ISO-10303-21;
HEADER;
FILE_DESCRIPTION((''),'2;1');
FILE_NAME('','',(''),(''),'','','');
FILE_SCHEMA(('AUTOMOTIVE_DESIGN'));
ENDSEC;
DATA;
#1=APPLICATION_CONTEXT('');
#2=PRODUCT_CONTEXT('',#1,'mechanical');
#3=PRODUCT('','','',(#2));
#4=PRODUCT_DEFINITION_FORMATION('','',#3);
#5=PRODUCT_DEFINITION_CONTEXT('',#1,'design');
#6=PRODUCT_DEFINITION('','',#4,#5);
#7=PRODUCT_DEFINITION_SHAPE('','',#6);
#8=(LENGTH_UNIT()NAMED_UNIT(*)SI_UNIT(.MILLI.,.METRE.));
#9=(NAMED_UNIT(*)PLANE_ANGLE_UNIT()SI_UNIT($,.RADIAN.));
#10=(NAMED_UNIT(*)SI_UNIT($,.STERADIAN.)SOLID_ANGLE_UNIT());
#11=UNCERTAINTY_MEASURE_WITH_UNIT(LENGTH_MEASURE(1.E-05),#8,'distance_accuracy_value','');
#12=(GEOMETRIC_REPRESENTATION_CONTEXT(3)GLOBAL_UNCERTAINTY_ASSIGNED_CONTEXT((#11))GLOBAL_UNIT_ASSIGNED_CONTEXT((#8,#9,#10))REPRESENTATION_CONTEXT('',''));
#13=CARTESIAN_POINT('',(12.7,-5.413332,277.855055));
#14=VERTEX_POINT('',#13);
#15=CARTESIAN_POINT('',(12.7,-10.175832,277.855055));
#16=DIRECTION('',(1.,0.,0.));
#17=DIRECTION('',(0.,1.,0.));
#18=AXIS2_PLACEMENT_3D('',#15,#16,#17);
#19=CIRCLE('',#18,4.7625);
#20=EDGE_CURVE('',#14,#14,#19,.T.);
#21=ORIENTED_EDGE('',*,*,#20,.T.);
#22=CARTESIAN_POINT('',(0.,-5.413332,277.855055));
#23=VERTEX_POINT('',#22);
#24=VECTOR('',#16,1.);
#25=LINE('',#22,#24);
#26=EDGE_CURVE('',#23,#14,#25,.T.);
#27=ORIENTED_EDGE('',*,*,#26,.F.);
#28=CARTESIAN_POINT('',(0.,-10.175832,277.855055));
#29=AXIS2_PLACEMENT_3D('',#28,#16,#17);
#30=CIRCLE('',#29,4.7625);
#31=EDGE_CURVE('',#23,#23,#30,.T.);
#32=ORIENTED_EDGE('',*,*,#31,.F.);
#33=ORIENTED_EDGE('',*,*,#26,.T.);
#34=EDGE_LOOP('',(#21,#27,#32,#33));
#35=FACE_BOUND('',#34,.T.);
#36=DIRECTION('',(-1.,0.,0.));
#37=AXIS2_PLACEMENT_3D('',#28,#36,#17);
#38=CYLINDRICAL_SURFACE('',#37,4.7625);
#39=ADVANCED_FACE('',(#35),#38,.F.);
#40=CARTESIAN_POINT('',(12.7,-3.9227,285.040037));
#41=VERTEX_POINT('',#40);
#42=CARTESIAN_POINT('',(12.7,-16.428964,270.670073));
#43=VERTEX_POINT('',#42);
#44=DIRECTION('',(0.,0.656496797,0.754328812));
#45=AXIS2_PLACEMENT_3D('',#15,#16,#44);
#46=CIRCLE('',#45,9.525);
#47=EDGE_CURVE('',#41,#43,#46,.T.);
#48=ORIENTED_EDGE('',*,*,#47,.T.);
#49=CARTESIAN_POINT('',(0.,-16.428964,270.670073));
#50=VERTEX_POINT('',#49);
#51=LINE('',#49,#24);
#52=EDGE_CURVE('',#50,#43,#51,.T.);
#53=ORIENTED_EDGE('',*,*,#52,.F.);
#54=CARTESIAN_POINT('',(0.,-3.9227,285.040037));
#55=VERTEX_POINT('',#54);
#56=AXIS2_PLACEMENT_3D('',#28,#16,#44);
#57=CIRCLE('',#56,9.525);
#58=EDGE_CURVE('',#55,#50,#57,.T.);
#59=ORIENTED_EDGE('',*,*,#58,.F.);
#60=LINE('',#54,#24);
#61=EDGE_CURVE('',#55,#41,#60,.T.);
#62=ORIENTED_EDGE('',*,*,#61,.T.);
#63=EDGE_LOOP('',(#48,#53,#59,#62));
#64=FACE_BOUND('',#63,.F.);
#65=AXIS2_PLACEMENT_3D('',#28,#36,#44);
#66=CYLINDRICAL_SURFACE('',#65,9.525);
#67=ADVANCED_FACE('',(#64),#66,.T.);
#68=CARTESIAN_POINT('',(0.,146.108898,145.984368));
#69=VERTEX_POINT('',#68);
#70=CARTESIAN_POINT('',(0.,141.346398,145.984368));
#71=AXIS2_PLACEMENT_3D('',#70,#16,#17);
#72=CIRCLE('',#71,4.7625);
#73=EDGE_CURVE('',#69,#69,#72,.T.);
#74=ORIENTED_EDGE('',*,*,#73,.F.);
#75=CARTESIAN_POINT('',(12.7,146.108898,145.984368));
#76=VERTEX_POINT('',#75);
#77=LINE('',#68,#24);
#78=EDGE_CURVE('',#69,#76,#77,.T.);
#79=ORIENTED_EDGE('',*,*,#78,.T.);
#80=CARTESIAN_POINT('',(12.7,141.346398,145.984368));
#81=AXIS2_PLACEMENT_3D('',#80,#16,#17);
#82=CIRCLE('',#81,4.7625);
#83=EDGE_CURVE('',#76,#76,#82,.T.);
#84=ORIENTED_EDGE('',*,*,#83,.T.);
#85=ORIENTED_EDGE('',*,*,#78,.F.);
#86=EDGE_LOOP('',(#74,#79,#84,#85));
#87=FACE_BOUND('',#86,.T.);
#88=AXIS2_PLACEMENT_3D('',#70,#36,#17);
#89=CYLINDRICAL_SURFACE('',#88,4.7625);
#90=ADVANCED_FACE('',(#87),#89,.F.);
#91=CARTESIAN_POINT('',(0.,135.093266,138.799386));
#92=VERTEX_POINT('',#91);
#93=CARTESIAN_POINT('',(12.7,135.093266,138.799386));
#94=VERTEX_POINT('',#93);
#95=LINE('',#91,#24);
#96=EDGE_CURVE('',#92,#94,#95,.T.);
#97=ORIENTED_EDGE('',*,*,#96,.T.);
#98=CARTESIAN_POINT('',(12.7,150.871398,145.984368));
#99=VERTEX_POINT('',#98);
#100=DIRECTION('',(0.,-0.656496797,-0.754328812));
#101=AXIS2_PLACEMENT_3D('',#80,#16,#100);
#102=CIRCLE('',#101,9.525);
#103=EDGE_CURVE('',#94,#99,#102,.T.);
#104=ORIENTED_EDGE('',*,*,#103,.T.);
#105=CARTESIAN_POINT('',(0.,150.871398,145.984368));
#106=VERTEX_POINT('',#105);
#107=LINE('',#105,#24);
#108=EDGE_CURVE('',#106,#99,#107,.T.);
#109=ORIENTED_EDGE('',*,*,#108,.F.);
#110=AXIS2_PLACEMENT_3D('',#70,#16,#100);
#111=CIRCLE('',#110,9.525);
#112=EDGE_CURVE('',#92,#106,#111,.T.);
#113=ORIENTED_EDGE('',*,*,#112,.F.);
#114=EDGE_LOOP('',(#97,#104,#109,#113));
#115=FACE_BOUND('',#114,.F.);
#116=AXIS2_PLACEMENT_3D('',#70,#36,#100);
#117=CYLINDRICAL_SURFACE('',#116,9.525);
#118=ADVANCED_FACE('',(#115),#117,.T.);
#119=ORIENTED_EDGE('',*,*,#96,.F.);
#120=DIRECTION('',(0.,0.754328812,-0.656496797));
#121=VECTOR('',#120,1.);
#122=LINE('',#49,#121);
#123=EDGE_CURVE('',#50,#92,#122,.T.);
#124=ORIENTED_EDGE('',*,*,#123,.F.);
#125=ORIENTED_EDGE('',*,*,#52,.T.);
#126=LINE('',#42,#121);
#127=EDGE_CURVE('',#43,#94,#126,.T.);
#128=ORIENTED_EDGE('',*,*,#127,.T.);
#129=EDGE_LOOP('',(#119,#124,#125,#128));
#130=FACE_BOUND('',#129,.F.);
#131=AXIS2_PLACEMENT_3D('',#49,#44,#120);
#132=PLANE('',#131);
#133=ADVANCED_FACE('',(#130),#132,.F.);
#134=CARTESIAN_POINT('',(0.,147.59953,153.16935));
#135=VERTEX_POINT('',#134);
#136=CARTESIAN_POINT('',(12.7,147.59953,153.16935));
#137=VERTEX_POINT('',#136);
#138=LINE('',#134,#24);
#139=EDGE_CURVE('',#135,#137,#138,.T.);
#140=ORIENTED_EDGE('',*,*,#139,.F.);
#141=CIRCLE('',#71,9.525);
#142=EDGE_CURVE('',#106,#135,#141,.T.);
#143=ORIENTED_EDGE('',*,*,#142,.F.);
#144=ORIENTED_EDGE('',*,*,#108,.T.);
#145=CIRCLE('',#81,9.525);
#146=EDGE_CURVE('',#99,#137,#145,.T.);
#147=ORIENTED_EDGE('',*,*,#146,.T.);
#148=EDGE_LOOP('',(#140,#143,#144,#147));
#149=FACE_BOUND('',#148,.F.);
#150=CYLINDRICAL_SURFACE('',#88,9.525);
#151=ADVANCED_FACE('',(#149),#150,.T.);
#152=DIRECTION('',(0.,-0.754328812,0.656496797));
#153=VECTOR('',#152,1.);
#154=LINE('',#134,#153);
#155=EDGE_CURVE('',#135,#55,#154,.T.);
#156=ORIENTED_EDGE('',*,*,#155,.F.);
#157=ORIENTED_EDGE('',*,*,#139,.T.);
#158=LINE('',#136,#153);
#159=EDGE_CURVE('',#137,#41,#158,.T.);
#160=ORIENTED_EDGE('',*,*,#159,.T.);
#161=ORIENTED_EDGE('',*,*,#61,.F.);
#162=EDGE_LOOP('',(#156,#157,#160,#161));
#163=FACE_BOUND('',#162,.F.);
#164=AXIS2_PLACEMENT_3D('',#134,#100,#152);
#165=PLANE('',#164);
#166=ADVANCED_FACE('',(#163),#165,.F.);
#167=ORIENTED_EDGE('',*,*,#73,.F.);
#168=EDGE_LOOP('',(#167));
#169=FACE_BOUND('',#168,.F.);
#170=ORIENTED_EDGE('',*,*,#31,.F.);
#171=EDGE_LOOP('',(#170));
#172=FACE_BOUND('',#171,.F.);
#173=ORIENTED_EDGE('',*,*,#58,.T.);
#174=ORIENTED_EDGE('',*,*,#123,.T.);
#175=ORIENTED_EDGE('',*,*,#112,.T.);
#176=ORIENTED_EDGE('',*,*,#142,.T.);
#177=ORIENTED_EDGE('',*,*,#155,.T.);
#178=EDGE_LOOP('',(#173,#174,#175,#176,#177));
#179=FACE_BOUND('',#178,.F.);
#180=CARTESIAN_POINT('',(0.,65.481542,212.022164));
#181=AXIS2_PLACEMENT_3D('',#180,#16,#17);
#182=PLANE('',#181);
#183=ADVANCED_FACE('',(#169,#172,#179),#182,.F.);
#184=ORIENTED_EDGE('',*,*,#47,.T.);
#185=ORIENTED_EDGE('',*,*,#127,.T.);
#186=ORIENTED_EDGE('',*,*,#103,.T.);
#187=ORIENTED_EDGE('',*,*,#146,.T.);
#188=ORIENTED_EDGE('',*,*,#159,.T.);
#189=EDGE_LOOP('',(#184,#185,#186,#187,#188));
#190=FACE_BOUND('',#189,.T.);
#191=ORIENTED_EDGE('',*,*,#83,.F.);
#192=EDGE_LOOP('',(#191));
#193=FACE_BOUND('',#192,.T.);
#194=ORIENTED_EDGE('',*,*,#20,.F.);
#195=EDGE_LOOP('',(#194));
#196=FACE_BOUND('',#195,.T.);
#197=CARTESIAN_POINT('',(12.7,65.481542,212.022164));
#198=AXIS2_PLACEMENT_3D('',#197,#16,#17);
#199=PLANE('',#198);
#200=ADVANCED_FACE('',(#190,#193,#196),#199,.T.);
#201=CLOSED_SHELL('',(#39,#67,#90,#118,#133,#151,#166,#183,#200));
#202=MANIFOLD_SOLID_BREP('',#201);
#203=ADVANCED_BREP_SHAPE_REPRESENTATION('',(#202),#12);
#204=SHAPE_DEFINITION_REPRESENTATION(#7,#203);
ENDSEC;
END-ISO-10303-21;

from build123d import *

# Parameters (mm, degrees)
F0_R     = 4.7625
F1_DEPTH = 12.7


# Not quite as in the source:
# - a feature names something its author has since deleted; it is built from what else it names


with BuildPart() as f1:
    # F0 (on Right) → F1 (new body)
    with BuildSketch(Plane.YZ):
        with BuildLine():
            ThreePointArc((135.0932664818, 138.7993858615), (134.1614165409, 152.23749978), (147.5995304594, 153.1693497209))
            Line((147.5995304594, 153.1693497209), (-3.9226998699, 285.0400370456))
            ThreePointArc((-3.9226998699, 285.0400370456), (-1.5073052482, 281.8024937035), (-0.6508318587, 277.8550551158))
            ThreePointArc((-0.6508318587, 277.8550551158), (-6.2283932711, 269.1865285054), (-16.4289638475, 270.6700731861))
            Line((-16.4289638475, 270.6700731861), (135.0932664818, 138.7993858615))
        make_face()
        with BuildLine():
            ThreePointArc((-0.6508318587, 277.8550551158), (-1.5073052482, 281.8024937035), (-3.9226998699, 285.0400370456))
            ThreePointArc((-3.9226998699, 285.0400370456), (-17.3608137885, 284.1081871047), (-16.4289638475, 270.6700731861))
            ThreePointArc((-16.4289638475, 270.6700731861), (-6.2283932711, 269.1865285054), (-0.6508318587, 277.8550551158))
        make_face()
        with Locations((-10.1758318587, 277.8550551158)):
            Circle(F0_R, mode=Mode.SUBTRACT)
        with BuildLine():
            ThreePointArc((135.0932664818, 138.7993858615), (145.2938370582, 137.3158411807), (150.8713984706, 145.9843677912))
            ThreePointArc((150.8713984706, 145.9843677912), (150.0149250811, 149.9318063789), (147.5995304594, 153.1693497209))
            ThreePointArc((147.5995304594, 153.1693497209), (134.1614165409, 152.23749978), (135.0932664818, 138.7993858615))
        make_face()
        with Locations((141.3463984706, 145.9843677912)):
            Circle(F0_R, mode=Mode.SUBTRACT)
    extrude(amount=F1_DEPTH)


solid = f1.part
